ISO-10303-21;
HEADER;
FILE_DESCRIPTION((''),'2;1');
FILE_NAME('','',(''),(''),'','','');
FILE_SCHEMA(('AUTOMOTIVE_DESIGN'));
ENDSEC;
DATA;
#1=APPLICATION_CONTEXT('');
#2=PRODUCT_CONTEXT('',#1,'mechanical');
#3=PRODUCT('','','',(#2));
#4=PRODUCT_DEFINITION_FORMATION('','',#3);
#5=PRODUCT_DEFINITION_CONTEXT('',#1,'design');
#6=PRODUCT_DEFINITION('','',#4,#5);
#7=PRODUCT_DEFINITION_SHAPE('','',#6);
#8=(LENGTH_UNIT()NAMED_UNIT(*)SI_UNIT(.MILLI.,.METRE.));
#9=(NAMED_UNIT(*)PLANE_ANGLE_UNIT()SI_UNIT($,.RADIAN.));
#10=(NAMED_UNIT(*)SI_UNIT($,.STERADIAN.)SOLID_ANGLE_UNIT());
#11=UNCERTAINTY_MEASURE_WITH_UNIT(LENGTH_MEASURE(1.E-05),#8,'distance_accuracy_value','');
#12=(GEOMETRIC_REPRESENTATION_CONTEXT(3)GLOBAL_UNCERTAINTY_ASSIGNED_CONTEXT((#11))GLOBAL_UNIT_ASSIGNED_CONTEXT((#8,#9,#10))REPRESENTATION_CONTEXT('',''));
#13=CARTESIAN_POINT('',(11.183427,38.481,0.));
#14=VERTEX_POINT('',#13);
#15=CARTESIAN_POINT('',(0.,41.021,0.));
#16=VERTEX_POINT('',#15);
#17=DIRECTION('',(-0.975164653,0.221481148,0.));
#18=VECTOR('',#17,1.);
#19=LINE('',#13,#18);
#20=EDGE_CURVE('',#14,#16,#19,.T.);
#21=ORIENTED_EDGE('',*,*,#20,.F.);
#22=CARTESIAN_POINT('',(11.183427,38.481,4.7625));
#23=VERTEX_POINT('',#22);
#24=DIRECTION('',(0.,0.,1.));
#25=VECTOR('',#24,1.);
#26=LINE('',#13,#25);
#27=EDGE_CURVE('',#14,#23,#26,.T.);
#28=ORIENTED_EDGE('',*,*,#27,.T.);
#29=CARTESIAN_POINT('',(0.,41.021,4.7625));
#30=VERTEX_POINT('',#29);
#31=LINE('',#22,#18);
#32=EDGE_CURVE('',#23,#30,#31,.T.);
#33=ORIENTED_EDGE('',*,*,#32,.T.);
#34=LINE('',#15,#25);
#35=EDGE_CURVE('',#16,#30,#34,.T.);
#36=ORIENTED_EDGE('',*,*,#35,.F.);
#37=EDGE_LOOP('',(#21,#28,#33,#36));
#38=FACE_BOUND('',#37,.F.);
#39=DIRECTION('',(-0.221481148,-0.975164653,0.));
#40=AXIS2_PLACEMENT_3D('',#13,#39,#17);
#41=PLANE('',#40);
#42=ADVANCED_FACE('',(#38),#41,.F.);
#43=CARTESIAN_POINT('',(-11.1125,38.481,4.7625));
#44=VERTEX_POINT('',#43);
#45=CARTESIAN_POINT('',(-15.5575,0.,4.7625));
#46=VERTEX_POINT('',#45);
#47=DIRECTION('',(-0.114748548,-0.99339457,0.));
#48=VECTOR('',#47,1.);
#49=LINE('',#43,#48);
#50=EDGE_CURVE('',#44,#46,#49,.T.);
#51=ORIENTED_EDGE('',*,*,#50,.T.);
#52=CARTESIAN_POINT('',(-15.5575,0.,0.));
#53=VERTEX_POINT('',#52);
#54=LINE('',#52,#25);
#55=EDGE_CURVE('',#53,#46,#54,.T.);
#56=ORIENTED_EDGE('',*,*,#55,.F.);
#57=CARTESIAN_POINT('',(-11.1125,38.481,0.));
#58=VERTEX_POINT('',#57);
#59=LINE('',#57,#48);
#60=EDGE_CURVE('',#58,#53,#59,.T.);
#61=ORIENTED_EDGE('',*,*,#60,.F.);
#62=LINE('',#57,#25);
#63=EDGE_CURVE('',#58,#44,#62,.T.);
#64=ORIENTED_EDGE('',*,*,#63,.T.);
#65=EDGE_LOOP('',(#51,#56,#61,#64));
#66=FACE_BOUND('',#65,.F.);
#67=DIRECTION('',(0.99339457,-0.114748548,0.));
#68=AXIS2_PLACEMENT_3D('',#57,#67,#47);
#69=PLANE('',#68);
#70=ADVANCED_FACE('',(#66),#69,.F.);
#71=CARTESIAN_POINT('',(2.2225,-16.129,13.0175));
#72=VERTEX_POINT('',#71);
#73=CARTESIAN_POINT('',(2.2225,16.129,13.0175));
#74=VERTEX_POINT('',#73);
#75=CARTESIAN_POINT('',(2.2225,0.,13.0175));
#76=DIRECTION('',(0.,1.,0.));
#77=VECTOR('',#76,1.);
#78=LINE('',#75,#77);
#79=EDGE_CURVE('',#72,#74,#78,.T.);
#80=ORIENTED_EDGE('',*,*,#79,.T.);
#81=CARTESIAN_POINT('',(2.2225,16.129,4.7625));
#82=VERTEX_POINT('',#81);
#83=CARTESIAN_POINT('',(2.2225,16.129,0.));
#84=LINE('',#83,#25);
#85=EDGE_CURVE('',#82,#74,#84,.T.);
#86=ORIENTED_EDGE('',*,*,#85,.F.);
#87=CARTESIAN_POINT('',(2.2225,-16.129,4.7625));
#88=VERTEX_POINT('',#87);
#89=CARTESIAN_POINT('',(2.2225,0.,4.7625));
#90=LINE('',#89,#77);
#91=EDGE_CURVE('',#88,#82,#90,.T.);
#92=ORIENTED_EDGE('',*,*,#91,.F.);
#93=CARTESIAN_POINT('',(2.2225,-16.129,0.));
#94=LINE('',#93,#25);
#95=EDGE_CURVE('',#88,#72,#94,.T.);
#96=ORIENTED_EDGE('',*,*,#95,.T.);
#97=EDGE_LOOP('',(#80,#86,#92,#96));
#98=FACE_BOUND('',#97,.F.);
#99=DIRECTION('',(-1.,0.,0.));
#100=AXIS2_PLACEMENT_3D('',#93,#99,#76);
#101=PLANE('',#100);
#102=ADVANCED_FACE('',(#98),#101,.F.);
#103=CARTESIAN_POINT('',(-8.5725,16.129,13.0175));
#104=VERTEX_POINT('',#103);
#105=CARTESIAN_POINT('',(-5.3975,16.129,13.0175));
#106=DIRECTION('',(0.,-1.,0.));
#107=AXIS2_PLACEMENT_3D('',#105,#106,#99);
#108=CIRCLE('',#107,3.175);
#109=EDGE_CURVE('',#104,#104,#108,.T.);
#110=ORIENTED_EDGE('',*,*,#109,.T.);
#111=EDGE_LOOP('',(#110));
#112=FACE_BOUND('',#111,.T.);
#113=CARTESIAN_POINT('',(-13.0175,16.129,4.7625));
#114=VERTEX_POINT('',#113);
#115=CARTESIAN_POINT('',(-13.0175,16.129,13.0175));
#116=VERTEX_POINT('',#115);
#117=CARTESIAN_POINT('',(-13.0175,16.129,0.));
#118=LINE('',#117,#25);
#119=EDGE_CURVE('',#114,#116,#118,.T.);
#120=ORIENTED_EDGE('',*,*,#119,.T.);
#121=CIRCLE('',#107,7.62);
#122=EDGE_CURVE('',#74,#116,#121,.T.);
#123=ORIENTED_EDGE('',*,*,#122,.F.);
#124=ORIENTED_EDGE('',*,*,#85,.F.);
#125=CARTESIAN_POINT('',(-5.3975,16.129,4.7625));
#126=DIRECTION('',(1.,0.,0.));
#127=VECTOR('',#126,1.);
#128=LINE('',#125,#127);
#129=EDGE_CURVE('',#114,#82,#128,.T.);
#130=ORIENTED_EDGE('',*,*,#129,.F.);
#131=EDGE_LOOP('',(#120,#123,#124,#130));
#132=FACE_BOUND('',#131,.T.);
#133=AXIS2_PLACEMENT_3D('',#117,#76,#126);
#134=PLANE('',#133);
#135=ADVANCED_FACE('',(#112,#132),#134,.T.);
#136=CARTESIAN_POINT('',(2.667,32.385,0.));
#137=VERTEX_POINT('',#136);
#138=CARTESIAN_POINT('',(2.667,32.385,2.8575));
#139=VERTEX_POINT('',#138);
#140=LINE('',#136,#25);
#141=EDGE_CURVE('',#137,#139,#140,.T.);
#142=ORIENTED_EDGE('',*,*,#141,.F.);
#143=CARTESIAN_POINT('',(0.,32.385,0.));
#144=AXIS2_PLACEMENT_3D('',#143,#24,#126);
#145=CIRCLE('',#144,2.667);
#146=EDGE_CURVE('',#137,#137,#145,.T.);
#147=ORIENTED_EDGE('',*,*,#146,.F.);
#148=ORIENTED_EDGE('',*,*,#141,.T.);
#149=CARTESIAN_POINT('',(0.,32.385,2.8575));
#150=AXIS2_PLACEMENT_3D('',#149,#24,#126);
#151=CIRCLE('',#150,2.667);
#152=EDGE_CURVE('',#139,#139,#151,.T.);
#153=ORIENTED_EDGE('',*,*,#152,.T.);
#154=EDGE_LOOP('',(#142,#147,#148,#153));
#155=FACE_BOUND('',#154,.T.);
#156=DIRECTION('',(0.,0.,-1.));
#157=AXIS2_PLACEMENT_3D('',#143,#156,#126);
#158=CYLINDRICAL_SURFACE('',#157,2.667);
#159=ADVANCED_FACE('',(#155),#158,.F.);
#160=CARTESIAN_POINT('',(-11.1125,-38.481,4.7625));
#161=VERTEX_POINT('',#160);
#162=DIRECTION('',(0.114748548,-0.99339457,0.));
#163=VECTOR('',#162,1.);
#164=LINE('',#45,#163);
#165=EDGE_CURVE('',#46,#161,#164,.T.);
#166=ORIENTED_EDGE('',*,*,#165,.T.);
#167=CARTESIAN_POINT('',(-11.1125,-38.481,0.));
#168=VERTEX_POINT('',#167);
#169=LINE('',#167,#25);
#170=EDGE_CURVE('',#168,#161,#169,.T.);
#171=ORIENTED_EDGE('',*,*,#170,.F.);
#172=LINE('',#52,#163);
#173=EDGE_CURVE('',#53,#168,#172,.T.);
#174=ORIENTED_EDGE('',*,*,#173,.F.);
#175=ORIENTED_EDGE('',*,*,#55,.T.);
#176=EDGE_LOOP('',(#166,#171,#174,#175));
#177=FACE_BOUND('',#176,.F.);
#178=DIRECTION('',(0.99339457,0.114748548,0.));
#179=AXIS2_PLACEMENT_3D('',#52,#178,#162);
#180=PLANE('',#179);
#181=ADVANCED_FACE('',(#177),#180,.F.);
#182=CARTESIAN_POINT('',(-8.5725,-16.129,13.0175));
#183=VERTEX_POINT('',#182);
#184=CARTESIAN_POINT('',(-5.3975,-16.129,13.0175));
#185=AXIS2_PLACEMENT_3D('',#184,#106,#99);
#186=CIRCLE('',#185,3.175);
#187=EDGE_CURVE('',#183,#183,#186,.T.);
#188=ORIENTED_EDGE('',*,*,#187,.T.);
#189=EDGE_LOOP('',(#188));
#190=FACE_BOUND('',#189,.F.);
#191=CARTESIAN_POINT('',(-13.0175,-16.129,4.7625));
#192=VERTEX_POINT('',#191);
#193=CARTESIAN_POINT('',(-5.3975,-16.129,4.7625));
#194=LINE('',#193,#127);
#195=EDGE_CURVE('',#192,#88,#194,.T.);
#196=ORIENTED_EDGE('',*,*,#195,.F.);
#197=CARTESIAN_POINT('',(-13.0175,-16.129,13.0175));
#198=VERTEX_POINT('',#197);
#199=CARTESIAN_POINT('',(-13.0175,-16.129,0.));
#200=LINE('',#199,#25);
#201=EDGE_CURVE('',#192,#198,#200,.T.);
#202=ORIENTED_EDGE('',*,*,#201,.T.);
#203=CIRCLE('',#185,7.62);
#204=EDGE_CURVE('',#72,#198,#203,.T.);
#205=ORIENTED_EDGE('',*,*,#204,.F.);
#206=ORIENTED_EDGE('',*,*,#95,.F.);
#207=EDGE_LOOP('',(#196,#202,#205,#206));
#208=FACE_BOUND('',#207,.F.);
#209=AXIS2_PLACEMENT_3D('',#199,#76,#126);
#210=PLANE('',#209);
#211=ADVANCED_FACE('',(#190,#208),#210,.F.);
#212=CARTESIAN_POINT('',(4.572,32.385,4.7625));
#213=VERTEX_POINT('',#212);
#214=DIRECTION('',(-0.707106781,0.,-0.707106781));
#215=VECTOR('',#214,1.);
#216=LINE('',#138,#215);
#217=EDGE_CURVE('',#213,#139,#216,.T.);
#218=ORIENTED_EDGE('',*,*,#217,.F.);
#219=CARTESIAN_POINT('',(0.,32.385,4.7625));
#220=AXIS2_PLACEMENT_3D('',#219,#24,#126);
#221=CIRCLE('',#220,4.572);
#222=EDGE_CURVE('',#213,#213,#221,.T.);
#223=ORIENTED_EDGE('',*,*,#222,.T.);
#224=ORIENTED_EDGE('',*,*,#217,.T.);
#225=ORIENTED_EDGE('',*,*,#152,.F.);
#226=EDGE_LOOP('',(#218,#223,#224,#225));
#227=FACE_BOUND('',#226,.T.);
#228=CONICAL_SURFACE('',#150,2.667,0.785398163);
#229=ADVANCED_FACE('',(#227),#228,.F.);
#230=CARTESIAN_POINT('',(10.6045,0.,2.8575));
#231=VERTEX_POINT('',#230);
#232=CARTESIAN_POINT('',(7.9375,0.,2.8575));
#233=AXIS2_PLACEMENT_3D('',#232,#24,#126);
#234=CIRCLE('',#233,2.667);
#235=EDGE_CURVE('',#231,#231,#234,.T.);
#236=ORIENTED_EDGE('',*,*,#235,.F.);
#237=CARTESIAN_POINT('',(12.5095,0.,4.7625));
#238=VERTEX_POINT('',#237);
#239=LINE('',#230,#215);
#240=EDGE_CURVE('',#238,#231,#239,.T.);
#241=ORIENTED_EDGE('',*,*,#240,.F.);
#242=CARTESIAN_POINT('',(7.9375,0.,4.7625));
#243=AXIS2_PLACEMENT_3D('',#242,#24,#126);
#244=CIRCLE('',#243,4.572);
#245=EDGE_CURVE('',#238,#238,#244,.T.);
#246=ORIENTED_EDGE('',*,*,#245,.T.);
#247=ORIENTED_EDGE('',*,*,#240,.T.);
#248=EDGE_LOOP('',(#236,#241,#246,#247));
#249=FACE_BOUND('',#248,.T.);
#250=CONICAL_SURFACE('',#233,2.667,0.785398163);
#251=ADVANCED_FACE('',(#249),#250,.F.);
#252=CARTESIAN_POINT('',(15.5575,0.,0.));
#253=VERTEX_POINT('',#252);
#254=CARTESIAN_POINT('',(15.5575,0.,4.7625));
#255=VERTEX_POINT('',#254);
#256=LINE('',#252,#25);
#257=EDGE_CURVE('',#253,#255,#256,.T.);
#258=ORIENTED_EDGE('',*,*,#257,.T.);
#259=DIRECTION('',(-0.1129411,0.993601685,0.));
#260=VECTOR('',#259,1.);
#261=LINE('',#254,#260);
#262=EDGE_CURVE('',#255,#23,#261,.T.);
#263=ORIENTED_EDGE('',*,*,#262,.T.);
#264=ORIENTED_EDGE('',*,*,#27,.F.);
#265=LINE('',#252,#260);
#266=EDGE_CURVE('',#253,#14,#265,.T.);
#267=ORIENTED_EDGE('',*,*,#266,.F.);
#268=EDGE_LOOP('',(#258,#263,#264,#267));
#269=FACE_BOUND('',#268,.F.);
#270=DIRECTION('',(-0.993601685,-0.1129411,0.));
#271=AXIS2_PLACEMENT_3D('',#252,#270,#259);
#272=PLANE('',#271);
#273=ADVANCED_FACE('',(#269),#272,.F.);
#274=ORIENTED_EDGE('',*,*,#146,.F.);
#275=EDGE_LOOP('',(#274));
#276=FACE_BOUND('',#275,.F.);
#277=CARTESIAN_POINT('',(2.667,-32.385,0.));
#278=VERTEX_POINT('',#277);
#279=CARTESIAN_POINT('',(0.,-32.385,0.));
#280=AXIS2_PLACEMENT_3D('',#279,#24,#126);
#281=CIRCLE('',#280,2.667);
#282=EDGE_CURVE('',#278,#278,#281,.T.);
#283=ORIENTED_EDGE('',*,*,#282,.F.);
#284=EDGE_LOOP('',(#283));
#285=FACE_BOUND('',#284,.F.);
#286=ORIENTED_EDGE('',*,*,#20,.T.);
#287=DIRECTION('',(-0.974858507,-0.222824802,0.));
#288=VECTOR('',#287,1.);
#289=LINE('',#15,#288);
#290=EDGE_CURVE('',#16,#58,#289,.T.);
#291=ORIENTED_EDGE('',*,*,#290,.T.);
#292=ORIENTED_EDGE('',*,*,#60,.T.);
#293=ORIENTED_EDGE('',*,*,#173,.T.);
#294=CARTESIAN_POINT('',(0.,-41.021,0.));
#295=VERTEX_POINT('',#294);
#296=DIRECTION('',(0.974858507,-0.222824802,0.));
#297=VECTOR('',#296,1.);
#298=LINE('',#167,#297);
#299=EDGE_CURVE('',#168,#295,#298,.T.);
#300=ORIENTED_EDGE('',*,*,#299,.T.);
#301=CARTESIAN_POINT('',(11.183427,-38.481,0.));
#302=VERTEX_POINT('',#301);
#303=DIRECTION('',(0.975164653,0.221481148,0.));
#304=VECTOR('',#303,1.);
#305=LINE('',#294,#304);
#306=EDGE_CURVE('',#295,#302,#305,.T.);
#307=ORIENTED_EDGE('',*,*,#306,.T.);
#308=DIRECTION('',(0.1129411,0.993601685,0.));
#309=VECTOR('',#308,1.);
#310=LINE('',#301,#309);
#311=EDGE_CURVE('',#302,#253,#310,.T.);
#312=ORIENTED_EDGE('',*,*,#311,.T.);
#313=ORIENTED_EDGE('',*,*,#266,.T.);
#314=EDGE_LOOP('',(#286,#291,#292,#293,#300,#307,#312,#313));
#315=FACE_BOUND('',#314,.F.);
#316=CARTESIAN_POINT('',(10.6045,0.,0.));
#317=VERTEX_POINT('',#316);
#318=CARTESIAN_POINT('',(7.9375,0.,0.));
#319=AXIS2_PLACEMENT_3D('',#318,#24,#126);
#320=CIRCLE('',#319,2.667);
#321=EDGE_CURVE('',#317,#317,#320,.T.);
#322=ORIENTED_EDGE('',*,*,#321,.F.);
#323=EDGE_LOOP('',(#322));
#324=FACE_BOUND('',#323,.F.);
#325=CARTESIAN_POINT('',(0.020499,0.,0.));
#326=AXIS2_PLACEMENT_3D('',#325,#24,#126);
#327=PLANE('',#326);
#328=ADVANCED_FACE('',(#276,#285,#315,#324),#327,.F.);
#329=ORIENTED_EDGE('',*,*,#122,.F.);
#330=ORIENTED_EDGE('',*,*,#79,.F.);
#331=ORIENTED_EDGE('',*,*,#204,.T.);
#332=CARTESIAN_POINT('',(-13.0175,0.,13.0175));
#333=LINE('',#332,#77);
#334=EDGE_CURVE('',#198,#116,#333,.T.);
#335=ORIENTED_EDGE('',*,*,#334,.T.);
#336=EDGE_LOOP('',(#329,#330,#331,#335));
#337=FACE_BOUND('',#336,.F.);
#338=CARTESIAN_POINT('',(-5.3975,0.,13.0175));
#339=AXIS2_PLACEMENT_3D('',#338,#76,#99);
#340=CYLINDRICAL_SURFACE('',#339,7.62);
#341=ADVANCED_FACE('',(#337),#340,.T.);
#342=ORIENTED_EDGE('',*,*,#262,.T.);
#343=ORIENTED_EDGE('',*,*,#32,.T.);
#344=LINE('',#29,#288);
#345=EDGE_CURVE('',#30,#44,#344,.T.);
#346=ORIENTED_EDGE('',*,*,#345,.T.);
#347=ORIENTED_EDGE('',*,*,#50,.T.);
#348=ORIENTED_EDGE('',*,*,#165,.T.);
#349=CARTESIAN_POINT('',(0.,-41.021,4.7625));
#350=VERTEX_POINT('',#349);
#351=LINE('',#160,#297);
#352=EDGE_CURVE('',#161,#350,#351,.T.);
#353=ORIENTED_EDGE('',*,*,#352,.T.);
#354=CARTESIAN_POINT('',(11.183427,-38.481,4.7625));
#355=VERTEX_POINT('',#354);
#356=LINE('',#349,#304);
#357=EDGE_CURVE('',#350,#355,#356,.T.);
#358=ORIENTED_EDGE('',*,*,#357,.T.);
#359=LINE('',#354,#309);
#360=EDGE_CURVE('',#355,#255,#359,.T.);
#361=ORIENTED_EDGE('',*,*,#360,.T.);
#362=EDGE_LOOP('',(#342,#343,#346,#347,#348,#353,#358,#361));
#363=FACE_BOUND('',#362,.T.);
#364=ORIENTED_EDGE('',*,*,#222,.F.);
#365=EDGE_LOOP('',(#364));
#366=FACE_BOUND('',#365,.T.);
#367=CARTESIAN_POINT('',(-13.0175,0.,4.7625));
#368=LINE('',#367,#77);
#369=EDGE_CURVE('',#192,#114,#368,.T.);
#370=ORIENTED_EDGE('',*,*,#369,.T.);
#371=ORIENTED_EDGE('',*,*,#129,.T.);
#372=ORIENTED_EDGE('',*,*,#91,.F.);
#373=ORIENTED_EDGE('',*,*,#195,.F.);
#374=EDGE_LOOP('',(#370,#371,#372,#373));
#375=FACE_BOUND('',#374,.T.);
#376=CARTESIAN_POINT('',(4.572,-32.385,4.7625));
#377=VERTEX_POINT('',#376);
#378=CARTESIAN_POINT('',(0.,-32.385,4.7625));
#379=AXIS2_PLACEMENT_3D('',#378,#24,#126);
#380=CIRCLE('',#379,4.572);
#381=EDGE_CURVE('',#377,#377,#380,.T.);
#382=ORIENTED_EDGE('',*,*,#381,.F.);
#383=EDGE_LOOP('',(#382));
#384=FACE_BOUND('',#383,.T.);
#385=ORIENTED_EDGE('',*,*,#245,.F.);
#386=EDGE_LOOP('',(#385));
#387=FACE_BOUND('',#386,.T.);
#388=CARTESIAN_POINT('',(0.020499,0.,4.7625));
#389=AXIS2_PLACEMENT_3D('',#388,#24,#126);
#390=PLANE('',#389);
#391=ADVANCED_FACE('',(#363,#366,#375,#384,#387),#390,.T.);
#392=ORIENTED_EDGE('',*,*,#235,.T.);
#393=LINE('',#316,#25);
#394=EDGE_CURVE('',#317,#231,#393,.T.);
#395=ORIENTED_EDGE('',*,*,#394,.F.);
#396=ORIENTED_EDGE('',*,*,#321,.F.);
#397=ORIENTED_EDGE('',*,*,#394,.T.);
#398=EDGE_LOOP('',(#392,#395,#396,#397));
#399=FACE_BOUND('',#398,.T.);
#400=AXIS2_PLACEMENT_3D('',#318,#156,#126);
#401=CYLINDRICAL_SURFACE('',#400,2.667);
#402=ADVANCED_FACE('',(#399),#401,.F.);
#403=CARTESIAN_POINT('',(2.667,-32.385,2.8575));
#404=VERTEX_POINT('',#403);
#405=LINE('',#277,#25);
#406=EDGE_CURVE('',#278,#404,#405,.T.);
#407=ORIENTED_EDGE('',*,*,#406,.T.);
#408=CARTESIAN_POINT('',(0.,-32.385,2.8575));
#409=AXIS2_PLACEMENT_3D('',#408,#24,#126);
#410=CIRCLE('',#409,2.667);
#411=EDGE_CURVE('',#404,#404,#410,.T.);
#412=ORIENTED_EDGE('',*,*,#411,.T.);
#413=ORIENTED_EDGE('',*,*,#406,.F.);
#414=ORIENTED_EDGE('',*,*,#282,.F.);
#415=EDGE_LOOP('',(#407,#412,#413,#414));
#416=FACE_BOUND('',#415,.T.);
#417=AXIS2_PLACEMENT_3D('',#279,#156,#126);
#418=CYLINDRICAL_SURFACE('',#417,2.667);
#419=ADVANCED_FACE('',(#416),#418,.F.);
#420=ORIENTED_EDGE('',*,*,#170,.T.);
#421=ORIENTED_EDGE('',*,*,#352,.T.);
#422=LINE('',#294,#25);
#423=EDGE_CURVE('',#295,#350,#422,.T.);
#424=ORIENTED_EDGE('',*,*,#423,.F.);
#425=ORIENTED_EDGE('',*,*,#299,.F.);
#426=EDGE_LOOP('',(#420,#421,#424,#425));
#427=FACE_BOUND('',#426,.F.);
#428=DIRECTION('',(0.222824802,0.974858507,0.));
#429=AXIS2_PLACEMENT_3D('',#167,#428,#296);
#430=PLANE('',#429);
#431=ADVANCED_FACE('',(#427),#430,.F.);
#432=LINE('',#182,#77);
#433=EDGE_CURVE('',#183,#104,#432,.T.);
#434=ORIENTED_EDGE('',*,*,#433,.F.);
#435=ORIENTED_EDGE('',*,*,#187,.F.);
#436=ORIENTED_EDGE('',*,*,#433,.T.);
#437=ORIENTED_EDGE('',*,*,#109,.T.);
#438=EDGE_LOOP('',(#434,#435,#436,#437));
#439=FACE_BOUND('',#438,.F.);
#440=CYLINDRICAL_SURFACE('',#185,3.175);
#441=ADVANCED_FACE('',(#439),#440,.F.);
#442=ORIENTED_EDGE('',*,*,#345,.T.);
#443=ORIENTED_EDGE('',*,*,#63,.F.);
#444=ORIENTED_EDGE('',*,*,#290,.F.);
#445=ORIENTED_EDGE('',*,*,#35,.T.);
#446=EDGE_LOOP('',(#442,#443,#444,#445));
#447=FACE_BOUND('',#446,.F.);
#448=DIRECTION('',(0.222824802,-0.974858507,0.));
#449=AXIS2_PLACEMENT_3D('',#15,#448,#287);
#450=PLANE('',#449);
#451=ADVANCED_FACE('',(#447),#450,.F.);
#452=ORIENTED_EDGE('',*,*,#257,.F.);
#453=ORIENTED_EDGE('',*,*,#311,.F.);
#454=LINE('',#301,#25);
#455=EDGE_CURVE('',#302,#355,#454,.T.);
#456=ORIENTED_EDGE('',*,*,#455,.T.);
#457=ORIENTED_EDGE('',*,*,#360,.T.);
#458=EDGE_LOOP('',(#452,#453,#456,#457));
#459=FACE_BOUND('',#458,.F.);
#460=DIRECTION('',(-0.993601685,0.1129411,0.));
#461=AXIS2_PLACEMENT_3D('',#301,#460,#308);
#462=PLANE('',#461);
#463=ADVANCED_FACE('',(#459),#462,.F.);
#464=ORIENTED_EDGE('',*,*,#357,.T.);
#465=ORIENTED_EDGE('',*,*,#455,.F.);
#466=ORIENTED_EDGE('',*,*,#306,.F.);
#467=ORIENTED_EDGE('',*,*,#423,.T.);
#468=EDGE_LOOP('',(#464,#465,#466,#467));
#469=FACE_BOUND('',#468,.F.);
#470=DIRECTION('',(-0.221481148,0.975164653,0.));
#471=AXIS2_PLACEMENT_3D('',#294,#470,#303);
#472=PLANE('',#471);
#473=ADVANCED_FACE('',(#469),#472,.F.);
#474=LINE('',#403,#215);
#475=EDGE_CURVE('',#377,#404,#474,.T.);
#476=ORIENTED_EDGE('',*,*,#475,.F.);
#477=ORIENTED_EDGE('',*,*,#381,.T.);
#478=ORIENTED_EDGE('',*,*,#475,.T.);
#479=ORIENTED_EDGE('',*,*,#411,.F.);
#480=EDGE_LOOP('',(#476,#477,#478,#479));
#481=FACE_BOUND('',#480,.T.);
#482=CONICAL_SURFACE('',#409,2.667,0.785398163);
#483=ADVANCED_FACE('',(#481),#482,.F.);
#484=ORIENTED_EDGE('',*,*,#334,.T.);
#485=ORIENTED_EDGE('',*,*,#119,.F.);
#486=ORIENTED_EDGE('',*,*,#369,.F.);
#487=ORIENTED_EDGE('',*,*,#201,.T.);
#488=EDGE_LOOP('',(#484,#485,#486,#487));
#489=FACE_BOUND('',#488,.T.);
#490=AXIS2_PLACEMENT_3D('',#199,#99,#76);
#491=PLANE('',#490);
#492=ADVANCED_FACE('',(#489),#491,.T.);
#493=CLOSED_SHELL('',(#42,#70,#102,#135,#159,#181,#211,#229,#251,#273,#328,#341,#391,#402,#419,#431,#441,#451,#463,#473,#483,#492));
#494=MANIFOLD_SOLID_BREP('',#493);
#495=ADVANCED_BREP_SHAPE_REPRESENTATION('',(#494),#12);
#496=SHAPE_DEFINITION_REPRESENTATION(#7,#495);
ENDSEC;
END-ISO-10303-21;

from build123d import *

# Parameters (mm, degrees)
F0_R     = 2.667
F0_W     = 15.24
F0_H     = 32.258
F1_DEPTH = 4.7625
F2_DEPTH = 13.0175
F3_W     = 7.62
F3_H     = 32.258
F6_DEPTH = 32.258
F7_SIZE  = 1.905


with BuildPart() as f1:
    # F0 (on Top) → F1 (new body)
    with BuildSketch(Plane.XY):
        Polygon((-11.1125, -38.481), (0, -41.021), (11.1834268409, -38.481), (15.5575, 0), (11.1834268409, 38.481), (0, 41.021), (-11.1125, 38.481), (-15.5575, 0), align=None)
        with Locations((0, -32.385)):
            Circle(F0_R, mode=Mode.SUBTRACT)
        with Locations((-5.3975, 0)):
            Rectangle(F0_W, F0_H, mode=Mode.SUBTRACT)
        with Locations((0, 32.385)):
            Circle(F0_R, mode=Mode.SUBTRACT)
        with Locations((7.9375, 0)):
            Circle(F0_R, mode=Mode.SUBTRACT)
    extrude(amount=F1_DEPTH)

    # F0 (on Top) → F2 (join)
    with BuildSketch(Plane.XY):
        with Locations((-5.3975, 0)):
            Rectangle(F0_W, F0_H)
    extrude(amount=F2_DEPTH)

    # F3 (on face) → F4 (revolve)
    with BuildSketch(Plane.XY.offset(13.0175)):
        with Locations((-9.2075, 0)):
            Rectangle(F3_W, F3_H)
    revolve(axis=Axis((-5.3975, 0, 13.0175), (0, -1, 0)))

    # F5 (on face) → F6 (cut)
    with BuildSketch(Plane.XZ.offset(16.129)):
        with BuildLine():
            ThreePointArc((-2.2225, 13.0175), (-5.3975, 16.1925), (-8.5725, 13.0175))
            ThreePointArc((-8.5725, 13.0175), (-5.3975, 9.8425), (-2.2225, 13.0175))
        make_face()
    extrude(amount=-F6_DEPTH, mode=Mode.SUBTRACT)

    # F7
    f7_edges = [f1.edges().sort_by_distance(p)[0] for p in [
        (-2.667, -32.385, 4.7625),
        (5.2705, 0, 4.7625),
        (-2.667, 32.385, 4.7625),
    ]]
    chamfer(f7_edges, length=F7_SIZE)


solid = f1.part
